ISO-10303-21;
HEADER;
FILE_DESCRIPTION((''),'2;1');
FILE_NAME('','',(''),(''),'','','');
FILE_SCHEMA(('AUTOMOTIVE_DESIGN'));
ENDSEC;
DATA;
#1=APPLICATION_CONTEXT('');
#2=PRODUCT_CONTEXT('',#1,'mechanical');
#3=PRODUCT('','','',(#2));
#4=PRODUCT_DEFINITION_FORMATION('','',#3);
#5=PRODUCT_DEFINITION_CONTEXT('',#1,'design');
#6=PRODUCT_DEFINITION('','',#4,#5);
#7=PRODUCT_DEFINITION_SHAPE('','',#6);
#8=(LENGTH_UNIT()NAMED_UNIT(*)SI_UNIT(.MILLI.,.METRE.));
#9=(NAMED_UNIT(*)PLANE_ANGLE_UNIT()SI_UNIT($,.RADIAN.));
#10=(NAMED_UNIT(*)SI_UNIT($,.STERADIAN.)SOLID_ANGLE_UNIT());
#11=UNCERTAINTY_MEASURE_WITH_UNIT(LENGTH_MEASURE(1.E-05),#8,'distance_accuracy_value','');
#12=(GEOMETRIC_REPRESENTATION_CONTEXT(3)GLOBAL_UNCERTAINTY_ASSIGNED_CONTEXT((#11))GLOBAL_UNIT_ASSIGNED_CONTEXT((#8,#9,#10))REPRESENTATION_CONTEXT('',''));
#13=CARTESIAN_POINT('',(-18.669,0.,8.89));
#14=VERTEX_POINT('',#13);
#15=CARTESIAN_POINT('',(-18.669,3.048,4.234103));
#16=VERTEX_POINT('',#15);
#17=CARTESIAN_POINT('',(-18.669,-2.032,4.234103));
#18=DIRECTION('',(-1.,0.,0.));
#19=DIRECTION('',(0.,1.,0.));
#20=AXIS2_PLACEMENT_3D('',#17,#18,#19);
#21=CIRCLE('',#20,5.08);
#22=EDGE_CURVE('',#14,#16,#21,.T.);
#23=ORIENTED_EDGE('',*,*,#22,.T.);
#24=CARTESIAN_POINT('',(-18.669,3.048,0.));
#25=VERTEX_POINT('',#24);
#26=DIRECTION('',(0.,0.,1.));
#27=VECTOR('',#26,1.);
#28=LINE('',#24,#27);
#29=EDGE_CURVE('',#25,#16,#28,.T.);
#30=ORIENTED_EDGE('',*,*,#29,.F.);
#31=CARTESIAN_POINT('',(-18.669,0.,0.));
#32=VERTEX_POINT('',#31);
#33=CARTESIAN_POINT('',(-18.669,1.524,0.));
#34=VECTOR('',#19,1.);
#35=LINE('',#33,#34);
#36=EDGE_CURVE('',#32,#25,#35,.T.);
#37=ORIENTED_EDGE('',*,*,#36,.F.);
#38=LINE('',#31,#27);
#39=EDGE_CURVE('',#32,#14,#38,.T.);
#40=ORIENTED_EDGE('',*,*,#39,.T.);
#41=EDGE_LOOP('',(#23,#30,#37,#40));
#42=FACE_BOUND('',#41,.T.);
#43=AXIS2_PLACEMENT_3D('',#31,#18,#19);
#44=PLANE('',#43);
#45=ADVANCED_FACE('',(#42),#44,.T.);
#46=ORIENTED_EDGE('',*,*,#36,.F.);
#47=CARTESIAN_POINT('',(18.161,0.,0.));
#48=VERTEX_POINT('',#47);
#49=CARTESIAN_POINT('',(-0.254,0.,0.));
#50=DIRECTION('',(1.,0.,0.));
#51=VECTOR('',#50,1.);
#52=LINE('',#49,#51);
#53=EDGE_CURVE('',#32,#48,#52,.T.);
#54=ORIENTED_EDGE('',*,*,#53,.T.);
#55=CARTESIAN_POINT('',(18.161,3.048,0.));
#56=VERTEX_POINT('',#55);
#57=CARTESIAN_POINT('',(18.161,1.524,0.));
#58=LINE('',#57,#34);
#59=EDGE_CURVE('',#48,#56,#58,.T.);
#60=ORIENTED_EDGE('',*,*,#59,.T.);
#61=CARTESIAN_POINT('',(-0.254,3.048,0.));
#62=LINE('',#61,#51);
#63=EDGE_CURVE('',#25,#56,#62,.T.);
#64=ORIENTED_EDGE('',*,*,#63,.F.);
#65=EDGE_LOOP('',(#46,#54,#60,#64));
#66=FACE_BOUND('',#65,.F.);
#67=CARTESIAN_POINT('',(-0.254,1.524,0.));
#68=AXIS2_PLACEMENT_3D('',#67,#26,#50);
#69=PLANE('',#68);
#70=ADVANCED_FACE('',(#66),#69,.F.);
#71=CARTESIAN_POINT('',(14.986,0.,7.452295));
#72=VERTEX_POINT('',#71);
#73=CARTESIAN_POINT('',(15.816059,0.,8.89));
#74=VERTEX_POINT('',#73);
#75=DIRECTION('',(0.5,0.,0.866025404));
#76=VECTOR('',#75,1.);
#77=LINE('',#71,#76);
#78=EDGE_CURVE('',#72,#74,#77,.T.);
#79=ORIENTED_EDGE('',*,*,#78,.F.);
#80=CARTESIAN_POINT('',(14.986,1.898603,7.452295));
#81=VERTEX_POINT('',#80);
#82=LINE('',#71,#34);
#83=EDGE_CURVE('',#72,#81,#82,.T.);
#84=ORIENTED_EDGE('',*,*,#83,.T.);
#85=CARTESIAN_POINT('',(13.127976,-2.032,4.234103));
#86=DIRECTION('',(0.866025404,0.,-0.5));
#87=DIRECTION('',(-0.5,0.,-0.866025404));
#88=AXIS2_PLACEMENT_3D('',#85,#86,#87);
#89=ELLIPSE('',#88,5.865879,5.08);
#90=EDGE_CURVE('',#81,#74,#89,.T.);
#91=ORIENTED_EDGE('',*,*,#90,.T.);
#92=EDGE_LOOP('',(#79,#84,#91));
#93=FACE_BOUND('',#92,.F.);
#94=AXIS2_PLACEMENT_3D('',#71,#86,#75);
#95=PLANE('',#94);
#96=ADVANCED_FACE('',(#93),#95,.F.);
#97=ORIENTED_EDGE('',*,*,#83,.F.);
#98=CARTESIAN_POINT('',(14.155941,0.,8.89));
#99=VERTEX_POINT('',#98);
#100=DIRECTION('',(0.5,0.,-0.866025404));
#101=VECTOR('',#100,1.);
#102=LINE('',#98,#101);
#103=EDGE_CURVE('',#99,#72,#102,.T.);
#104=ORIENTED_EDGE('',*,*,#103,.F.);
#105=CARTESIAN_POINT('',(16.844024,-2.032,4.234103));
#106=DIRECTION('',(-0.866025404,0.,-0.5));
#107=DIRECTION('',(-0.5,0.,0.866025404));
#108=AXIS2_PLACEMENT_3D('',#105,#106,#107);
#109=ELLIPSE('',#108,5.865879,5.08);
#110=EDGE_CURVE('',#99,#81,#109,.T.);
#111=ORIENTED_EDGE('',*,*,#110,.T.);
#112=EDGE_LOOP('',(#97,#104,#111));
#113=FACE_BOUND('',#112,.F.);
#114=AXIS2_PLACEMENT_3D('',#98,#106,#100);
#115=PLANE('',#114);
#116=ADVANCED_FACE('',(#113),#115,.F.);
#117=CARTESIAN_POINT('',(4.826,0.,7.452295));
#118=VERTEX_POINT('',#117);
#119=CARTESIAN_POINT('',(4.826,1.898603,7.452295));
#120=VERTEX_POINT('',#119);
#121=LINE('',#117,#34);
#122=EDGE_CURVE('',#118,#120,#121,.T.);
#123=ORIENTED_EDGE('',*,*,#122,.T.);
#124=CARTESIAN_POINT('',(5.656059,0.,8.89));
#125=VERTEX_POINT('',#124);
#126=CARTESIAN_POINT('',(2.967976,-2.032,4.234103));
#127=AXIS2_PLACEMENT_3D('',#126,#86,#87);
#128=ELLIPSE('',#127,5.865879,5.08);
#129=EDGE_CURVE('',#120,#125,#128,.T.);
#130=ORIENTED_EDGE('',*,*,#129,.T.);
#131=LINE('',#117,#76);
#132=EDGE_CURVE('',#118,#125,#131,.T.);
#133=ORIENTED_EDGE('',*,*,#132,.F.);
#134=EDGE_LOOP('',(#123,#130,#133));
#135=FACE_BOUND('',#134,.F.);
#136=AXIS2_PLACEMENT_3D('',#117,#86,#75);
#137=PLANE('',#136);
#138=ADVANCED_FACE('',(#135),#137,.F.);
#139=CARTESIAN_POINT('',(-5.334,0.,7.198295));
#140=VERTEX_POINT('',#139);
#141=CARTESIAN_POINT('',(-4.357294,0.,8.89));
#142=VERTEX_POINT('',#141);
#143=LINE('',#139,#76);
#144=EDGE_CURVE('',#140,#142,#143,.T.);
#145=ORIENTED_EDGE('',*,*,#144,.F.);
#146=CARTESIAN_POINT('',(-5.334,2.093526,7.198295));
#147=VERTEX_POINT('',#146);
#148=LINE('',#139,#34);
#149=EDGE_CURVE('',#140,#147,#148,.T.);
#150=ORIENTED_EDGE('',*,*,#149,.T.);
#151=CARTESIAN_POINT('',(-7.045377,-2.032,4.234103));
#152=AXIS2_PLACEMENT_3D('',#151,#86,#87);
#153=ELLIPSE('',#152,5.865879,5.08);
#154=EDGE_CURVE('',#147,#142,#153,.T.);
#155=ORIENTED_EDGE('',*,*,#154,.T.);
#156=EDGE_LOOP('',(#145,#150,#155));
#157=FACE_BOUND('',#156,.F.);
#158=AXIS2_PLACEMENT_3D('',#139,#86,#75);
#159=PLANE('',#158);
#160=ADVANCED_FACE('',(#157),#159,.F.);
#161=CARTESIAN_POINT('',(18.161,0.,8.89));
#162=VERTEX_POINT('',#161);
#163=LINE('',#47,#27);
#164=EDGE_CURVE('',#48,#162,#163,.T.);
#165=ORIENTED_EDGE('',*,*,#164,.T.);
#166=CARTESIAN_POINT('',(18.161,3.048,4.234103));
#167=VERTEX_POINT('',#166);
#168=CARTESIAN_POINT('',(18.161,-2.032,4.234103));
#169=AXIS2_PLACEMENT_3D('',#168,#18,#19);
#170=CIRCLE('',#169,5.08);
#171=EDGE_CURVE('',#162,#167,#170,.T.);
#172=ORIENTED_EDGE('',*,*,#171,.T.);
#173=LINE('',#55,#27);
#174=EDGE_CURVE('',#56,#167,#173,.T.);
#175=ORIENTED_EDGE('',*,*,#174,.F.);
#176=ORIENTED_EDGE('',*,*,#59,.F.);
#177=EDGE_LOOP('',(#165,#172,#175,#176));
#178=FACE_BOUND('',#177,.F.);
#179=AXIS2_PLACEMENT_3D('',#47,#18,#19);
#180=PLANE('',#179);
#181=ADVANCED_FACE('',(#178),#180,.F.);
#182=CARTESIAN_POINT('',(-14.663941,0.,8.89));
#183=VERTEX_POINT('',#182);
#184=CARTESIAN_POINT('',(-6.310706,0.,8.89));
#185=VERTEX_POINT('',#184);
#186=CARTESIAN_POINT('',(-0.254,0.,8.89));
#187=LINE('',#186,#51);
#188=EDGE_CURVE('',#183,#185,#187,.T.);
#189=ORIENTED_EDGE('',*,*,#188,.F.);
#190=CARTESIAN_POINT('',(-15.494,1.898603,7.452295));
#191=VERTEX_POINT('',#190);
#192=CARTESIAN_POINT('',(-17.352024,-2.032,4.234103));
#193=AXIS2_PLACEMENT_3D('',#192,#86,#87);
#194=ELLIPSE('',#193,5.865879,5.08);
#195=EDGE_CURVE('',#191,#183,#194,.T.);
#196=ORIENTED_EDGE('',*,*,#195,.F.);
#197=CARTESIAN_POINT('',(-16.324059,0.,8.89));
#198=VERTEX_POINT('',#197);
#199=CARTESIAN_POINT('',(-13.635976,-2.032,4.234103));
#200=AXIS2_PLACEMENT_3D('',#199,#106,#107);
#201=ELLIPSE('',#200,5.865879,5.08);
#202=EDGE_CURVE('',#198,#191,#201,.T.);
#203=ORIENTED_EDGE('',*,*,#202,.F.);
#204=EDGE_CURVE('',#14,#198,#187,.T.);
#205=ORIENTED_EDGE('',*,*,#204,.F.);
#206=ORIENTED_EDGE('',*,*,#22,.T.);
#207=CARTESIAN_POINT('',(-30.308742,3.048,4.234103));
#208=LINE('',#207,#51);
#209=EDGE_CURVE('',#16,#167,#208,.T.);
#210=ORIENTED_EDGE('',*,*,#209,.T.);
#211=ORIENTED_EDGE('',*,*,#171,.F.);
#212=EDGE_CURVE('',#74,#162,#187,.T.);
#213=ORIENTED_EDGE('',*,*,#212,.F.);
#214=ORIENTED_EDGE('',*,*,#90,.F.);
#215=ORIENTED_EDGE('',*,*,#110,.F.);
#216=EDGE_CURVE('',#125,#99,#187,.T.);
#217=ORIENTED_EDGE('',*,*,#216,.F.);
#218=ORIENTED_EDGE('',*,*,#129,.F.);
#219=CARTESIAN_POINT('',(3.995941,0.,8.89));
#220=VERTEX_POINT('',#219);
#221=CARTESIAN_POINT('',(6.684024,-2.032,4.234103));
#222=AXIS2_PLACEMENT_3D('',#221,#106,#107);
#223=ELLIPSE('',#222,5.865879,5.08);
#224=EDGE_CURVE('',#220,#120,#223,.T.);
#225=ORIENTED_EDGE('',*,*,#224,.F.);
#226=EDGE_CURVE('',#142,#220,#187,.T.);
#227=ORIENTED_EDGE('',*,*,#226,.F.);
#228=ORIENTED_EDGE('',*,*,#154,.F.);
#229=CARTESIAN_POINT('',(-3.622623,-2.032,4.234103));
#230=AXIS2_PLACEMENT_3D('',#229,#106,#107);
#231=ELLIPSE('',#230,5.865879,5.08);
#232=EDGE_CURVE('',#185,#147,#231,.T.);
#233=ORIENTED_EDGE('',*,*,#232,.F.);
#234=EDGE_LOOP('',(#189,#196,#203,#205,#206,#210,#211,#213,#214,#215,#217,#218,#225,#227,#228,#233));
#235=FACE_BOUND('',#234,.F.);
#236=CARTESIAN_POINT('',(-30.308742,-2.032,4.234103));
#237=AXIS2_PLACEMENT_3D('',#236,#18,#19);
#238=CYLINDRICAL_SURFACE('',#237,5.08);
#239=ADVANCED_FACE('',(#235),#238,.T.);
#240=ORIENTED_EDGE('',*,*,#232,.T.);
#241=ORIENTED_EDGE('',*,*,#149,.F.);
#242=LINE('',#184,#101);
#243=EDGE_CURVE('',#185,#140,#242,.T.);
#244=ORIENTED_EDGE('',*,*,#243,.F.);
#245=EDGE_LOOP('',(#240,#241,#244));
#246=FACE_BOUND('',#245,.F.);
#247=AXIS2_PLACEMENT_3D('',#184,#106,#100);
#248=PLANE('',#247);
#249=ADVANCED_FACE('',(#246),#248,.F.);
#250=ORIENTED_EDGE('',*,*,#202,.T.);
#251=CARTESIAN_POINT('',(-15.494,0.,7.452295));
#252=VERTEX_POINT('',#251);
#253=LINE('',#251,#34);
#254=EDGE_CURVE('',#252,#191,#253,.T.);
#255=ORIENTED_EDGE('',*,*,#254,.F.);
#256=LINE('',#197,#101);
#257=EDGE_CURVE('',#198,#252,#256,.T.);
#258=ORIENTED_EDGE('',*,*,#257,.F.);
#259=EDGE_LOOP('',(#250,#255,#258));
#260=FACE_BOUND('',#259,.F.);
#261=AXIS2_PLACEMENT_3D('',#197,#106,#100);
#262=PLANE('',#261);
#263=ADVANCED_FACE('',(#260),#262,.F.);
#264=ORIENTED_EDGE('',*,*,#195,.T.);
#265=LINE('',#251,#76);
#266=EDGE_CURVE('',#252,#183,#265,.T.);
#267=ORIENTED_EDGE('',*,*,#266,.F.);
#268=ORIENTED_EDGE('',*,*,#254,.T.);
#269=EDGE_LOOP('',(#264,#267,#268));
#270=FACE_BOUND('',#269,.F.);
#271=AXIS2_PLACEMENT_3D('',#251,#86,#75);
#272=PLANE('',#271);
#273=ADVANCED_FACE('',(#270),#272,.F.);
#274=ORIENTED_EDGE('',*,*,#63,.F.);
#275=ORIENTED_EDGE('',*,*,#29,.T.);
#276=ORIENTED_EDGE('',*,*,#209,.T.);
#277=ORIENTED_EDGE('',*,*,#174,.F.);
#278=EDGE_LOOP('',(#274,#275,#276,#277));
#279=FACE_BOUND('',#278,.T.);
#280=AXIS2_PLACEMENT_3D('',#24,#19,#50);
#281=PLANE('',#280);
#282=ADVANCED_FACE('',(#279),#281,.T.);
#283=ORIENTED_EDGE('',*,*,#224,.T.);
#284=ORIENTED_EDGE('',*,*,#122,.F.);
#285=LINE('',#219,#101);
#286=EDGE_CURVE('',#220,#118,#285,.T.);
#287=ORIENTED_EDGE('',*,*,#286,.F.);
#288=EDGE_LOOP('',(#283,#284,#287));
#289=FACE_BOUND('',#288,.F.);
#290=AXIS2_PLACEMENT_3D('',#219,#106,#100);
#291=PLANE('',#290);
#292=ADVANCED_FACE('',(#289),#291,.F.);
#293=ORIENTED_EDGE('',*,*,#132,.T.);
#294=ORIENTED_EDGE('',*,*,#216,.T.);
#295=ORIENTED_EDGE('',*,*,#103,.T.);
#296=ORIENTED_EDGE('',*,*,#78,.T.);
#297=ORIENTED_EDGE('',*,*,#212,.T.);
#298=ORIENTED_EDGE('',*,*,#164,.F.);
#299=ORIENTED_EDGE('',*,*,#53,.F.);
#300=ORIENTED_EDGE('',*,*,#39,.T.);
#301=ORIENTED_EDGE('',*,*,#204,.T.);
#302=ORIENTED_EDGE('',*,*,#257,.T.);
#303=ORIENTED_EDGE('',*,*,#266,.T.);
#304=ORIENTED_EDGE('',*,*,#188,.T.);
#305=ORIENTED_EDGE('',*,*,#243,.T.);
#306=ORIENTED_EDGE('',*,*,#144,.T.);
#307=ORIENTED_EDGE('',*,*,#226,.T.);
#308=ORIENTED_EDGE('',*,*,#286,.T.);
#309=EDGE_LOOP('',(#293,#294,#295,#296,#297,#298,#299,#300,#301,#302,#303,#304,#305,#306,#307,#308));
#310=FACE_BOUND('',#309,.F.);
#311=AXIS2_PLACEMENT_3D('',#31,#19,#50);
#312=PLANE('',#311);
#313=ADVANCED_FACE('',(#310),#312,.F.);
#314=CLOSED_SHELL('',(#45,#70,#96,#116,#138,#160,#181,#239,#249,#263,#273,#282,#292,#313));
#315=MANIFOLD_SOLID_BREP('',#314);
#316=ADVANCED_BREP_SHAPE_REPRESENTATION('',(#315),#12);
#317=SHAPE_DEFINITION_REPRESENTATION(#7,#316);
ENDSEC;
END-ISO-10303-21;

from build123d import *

# Parameters (mm, degrees)
F0_W        = 36.83
F0_H        = 3.048
F1_DEPTH    = 8.89
F3_T1_DEPTH = 60.1094845304
F4_DEPTH    = 25.4


# Not quite as in the source:
# - a fillet or chamfer that OpenCascade refuses, or shapes differently, is made with other operations: its cross-section is extruded or revolved along the edge and cut away or added


with BuildPart() as f1:
    # F0 (on Top) → F1 (new body)
    with BuildSketch(Plane.XY):
        with Locations((-0.254, 1.524)):
            Rectangle(F0_W, F0_H)
    extrude(amount=F1_DEPTH)

    # F3: fillet of radius 5.08 on 1 edges, made by hand

    # F3_s2 → F3_t1 (cut)
    with BuildSketch(Plane.YZ.offset(-30.3087422652)):
        with BuildLine():
            ThreePointArc((3.048, 4.2341030939), (2.2182329348, 7.0165336861), (0, 8.89))
            Line((0, 8.89), (3.048, 8.89))
            Line((3.048, 8.89), (3.048, 4.2341030939))
        make_face()
    extrude(amount=F3_T1_DEPTH, mode=Mode.SUBTRACT)

    # F2 (on face) → F4 (cut)
    with BuildSketch(Plane.XZ):
        Polygon((-15.494, 7.4522954744), (-14.6639409051, 8.89), (-16.3240590949, 8.89), align=None)
        Polygon((-4.3572939367, 8.89), (-6.3107060633, 8.89), (-5.334, 7.1982954744), align=None)
        Polygon((5.6560590949, 8.89), (3.9959409051, 8.89), (4.826, 7.4522954744), align=None)
        Polygon((15.8160590949, 8.89), (14.1559409051, 8.89), (14.986, 7.4522954744), align=None)
    extrude(amount=-F4_DEPTH, mode=Mode.SUBTRACT)


solid = f1.part
